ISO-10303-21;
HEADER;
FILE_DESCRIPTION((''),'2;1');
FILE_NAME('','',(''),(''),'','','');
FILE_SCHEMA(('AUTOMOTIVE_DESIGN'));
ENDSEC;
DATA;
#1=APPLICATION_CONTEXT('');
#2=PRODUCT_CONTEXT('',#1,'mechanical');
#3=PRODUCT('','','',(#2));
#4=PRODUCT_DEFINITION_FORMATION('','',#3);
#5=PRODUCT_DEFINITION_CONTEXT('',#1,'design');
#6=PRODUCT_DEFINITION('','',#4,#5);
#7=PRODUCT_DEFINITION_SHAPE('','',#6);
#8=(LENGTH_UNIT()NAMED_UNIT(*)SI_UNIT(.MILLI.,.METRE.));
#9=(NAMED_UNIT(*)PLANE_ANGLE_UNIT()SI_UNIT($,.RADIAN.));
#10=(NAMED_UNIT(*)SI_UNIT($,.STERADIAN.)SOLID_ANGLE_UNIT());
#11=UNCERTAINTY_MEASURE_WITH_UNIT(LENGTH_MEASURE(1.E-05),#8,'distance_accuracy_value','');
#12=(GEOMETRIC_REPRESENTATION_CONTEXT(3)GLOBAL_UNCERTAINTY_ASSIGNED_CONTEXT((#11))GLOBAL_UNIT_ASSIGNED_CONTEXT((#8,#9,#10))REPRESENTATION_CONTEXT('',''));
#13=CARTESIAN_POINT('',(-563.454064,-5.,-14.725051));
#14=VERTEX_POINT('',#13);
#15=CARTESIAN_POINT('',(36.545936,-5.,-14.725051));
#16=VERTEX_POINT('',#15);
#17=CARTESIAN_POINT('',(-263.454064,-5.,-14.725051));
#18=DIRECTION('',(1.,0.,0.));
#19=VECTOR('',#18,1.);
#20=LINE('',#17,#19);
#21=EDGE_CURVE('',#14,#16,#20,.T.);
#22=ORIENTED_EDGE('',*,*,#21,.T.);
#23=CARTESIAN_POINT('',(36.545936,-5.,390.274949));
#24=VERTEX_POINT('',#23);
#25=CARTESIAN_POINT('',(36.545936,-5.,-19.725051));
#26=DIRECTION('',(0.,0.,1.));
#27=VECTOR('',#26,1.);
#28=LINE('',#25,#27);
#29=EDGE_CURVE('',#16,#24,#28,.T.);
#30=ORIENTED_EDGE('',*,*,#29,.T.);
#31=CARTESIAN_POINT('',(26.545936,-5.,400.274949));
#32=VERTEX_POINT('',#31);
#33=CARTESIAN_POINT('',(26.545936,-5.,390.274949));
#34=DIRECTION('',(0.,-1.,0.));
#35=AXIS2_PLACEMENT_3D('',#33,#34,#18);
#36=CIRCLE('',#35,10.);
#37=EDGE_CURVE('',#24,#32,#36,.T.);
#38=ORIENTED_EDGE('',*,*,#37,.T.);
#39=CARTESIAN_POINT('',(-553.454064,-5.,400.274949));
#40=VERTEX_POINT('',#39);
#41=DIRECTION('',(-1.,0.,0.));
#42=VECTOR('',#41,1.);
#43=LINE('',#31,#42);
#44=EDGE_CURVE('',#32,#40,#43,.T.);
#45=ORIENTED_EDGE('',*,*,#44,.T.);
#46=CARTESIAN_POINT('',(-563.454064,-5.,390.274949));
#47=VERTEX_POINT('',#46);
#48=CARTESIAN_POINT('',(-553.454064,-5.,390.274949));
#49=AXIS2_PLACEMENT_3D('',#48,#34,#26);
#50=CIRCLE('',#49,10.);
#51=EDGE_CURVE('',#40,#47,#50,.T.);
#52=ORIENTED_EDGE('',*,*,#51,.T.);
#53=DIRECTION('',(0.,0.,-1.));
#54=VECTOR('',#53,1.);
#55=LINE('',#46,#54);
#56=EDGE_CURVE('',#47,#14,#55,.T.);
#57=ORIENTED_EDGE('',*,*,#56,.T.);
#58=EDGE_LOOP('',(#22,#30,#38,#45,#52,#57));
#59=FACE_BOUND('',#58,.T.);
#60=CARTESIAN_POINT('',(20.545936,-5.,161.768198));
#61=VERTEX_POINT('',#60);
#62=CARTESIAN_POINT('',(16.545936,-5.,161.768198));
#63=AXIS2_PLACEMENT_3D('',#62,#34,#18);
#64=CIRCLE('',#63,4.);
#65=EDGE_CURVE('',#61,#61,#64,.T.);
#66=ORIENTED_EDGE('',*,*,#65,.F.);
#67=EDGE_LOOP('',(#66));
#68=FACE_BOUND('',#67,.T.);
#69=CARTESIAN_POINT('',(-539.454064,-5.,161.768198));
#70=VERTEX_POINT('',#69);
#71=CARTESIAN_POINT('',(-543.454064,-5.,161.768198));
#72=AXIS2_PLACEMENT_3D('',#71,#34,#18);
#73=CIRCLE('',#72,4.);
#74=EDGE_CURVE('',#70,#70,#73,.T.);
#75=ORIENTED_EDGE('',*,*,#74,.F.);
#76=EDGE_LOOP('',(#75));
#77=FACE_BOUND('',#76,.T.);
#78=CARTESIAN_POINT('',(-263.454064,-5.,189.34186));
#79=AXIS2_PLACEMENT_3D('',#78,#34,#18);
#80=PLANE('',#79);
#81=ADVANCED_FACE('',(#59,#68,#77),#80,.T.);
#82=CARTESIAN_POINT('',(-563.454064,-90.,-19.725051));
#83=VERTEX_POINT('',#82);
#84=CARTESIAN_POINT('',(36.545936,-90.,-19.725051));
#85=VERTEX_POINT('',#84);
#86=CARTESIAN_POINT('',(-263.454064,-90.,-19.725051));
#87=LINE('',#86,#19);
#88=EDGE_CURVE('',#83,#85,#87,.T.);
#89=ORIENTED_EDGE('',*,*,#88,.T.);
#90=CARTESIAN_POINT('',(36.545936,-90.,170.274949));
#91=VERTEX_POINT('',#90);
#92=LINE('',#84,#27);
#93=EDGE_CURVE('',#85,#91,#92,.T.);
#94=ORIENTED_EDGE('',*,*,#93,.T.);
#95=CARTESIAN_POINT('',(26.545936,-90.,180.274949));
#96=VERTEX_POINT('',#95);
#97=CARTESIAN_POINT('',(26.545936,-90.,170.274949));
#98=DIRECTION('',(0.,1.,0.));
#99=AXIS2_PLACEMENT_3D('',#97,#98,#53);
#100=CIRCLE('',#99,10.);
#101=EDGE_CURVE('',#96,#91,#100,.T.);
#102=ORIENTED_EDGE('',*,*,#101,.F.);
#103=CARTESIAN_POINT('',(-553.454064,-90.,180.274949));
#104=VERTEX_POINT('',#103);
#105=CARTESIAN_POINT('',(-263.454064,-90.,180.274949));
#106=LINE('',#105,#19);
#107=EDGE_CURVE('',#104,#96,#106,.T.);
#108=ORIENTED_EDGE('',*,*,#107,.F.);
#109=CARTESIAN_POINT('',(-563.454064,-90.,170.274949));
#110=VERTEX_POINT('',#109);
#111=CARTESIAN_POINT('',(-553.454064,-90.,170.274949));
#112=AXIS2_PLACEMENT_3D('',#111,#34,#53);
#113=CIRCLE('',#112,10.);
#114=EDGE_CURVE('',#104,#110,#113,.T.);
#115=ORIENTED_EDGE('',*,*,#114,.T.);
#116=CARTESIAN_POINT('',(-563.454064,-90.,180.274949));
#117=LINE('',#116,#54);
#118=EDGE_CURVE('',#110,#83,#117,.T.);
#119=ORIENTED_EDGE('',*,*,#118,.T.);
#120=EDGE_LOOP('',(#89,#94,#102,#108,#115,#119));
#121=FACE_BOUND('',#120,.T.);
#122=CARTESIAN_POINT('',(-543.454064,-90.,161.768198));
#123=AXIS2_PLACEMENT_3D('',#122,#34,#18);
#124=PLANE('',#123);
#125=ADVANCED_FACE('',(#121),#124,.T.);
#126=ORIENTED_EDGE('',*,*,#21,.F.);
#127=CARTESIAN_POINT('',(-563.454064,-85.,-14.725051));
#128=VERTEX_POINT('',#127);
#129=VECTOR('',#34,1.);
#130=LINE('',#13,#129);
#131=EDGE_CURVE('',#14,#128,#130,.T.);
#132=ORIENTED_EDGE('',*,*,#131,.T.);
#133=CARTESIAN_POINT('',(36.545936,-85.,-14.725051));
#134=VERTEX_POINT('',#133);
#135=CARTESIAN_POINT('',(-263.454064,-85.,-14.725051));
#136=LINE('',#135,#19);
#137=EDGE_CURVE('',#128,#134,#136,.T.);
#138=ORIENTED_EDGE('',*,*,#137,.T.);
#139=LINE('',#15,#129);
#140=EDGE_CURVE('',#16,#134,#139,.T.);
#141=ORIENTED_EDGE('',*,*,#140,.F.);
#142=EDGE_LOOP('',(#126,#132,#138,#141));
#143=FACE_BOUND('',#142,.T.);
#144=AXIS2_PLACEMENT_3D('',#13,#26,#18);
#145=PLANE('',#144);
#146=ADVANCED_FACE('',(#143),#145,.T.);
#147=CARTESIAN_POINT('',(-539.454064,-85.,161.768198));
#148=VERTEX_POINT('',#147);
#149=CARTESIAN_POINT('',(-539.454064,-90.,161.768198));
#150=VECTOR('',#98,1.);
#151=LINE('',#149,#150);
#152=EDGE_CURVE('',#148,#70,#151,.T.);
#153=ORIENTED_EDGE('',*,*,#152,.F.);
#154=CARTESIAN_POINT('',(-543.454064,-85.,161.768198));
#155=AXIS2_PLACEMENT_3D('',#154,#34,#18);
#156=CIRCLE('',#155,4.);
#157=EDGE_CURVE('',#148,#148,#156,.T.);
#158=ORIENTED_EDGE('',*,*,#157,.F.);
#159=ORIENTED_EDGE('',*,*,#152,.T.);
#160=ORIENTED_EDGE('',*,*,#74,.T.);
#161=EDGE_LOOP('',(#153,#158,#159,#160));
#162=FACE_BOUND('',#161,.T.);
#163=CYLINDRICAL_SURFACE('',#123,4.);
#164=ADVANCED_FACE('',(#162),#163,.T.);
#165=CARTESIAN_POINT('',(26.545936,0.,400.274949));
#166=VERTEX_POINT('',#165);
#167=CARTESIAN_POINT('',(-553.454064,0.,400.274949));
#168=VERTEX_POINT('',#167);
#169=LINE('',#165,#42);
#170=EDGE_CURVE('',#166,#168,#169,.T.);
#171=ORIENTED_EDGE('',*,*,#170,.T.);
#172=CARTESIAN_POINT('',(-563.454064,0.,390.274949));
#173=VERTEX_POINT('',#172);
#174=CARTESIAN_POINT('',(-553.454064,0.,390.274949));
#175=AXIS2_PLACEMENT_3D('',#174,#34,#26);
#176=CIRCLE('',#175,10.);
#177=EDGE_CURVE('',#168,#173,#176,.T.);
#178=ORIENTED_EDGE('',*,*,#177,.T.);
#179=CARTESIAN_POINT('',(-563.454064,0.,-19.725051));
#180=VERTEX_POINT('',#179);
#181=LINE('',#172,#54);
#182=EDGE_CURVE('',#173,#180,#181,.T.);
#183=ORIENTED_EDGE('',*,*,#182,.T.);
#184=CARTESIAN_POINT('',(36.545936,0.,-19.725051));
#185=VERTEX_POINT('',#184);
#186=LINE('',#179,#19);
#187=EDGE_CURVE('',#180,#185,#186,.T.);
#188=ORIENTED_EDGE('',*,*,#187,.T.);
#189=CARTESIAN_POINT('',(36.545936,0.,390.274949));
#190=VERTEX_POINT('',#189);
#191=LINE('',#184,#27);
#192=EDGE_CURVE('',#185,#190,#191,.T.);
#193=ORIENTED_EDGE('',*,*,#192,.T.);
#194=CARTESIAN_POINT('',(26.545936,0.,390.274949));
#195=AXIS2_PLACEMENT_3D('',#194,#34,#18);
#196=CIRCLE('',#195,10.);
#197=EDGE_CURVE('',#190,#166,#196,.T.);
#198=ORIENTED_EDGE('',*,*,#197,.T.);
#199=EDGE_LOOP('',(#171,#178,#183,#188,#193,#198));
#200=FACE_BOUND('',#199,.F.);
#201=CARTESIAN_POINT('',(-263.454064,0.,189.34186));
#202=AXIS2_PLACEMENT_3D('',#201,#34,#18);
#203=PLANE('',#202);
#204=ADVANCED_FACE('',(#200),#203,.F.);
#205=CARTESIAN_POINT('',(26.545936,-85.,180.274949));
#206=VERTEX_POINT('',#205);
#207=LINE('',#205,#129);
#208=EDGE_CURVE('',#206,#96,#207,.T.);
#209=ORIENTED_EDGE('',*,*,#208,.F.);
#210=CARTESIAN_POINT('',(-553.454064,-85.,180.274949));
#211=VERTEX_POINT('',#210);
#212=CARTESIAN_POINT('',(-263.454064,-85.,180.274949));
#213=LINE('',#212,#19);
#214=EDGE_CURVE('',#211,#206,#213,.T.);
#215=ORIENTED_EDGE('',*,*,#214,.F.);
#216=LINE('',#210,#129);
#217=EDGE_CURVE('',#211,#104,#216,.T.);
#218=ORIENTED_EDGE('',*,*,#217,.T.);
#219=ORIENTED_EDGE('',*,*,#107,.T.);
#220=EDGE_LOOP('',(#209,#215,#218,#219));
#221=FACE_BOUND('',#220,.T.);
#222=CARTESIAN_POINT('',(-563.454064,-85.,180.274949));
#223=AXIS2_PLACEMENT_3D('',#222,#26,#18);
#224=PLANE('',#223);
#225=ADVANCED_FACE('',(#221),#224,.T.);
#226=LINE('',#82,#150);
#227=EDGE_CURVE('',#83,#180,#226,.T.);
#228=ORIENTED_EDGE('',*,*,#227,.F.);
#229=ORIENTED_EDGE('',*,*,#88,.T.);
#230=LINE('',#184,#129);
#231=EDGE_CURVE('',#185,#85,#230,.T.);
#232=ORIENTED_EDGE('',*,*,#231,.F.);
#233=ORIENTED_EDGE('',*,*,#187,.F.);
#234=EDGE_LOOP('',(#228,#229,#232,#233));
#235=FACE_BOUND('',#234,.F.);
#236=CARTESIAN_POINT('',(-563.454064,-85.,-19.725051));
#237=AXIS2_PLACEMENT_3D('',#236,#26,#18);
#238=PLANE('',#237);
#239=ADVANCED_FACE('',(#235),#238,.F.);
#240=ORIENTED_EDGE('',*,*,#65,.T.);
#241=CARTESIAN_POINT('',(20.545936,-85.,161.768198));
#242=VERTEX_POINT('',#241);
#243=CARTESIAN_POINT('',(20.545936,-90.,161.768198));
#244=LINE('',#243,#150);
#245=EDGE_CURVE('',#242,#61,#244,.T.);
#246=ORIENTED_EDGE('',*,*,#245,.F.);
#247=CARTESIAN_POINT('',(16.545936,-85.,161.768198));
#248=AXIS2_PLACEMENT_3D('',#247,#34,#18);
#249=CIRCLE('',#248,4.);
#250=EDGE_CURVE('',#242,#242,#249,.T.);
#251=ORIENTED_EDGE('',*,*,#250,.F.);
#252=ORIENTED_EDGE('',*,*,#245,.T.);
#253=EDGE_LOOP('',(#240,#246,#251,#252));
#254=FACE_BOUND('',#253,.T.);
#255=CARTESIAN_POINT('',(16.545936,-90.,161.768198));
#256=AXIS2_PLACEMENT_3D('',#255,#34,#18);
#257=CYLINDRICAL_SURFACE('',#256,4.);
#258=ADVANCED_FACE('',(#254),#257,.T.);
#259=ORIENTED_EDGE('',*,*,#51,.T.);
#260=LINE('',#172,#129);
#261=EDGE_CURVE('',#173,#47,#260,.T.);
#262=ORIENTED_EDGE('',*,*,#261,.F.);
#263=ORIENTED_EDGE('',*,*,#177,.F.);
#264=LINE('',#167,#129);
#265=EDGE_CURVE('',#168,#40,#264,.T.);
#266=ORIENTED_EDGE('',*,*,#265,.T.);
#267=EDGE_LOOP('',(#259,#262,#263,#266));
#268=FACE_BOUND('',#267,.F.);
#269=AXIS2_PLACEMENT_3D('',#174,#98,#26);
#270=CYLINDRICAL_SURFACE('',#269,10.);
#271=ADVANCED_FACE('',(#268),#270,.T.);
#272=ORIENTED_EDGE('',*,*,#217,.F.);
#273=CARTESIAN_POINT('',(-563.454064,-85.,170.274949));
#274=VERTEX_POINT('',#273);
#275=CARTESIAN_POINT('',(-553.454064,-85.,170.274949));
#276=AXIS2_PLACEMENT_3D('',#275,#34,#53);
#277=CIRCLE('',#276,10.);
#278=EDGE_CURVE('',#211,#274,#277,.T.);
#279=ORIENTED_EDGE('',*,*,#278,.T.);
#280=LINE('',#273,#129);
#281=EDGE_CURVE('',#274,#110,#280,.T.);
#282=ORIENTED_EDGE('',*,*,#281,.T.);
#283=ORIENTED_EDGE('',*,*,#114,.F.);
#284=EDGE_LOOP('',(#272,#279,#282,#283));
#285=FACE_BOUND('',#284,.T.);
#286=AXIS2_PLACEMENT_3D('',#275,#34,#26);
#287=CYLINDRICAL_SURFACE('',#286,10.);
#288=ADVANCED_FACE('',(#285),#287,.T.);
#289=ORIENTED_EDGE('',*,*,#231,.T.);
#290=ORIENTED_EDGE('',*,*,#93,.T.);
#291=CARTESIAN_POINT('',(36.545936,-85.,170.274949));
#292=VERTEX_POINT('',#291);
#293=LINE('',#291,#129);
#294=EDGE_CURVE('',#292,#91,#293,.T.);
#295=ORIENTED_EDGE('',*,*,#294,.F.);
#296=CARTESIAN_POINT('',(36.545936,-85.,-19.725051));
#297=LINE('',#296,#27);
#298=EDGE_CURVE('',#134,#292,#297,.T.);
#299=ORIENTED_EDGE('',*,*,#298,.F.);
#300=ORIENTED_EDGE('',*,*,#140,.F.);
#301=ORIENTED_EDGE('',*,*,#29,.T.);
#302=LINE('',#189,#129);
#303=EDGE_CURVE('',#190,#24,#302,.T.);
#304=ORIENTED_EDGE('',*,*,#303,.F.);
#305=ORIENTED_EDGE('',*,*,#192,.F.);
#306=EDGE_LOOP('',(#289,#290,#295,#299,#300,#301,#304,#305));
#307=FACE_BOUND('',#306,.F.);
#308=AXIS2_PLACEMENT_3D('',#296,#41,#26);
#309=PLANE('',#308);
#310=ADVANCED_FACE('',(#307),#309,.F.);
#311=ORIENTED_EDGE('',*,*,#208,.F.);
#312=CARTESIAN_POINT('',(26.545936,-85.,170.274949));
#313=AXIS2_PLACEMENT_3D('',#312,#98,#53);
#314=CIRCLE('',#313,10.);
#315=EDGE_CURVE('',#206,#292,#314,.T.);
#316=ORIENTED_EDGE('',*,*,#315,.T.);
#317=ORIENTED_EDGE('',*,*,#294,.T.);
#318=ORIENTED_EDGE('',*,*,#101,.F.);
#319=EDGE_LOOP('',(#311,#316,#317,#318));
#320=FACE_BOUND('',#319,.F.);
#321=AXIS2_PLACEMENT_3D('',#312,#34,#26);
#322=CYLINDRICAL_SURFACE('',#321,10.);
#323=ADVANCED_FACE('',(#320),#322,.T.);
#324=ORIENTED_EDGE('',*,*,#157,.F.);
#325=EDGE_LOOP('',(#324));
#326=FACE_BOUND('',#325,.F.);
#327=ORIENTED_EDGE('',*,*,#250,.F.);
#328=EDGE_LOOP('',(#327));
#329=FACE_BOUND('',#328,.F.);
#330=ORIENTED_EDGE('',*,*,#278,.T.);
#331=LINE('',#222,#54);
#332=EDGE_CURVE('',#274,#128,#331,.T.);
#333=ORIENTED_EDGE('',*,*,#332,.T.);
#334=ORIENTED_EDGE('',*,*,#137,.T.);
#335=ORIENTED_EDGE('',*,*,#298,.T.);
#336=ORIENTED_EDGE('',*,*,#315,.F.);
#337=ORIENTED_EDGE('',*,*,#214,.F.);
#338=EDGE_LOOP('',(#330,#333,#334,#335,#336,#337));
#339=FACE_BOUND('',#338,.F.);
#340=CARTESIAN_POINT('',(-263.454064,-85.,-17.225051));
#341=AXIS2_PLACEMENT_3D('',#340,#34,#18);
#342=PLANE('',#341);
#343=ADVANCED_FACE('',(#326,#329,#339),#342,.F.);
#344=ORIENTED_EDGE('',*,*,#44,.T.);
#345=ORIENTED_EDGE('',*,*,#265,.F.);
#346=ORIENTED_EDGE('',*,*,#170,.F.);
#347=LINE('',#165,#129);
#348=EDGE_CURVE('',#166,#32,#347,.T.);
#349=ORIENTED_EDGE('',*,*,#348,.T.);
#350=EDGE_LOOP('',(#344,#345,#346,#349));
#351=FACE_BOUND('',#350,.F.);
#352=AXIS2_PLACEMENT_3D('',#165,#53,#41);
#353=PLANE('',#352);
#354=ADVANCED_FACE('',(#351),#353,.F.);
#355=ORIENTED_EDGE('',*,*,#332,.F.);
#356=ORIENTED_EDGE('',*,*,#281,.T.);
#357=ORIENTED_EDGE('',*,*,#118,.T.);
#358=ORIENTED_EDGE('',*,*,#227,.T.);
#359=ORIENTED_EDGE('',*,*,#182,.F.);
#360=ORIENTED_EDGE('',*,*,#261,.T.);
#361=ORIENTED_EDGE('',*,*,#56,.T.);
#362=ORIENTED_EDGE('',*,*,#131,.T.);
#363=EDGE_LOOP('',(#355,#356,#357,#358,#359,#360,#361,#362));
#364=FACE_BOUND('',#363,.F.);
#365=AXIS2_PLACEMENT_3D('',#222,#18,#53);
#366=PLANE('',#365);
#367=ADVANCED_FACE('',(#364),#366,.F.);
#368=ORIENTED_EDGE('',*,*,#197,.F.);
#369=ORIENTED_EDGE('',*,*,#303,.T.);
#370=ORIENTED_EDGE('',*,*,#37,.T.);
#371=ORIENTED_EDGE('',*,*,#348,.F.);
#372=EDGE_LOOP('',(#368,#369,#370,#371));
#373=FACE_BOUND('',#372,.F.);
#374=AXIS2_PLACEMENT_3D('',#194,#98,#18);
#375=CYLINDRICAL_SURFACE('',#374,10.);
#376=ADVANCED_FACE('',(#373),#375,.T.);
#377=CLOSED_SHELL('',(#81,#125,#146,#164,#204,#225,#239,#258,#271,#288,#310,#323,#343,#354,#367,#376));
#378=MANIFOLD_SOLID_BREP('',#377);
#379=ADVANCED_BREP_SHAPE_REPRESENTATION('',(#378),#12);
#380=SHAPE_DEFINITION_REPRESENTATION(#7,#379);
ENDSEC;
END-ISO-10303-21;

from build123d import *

# Parameters (mm, degrees)
F1_DEPTH = 5
F2_W     = 600
F2_H     = 5
F3_DEPTH = 80
F4_W     = 600
F4_H     = 5
F4_H_2   = 195
F5_DEPTH = 5
F6_R     = 10
F7_R     = 4
F8_DEPTH = 85


# Not quite as in the source:
# - a feature names something its author has since deleted; it is built from what else it names


with BuildPart() as f1:
    # F0 (on Front) → F1 (new body)
    with BuildSketch(Plane.XZ):
        with BuildLine():
            Line((26.5459360182, 400.2749490738), (-553.4540639818, 400.2749490738))
            ThreePointArc((-553.4540639818, 400.2749490738), (-560.5251317936, 397.3460168857), (-563.4540639818, 390.2749490738))
            Line((-563.4540639818, 390.2749490738), (-563.4540639818, -19.7250509262))
            Line((-563.4540639818, -19.7250509262), (36.5459360182, -19.7250509262))
            Line((36.5459360182, -19.7250509262), (36.5459360182, 390.2749490738))
            ThreePointArc((36.5459360182, 390.2749490738), (33.6170038301, 397.3460168857), (26.5459360182, 400.2749490738))
        make_face()
    extrude(amount=F1_DEPTH)

    # F2 (on face) → F3 (join)
    with BuildSketch(Plane.XZ.offset(5)):
        with Locations((-263.4540639818, -17.2250509262)):
            Rectangle(F2_W, F2_H)
    extrude(amount=F3_DEPTH)

    # F4 (on face) → F5 (join)
    with BuildSketch(Plane.XZ.offset(85)):
        with Locations((-263.4540639818, -17.2250509262)):
            Rectangle(F4_W, F4_H)
        with Locations((-263.4540639818, 82.7749490738)):
            Rectangle(F4_W, F4_H_2)
    extrude(amount=F5_DEPTH)

    # F6
    f6_edges = [f1.edges().sort_by_distance(p)[0] for p in [
        (-563.454064, -87.5, 180.274949),
        (36.545936, -87.5, 180.274949),
    ]]
    fillet(f6_edges, radius=F6_R)

    # F7 (on face) → F8 (join)
    with BuildSketch(Plane.XZ.offset(90)):
        with Locations((-543.4540639818, 161.7681980133)):
            Circle(F7_R)
        with Locations((16.5459360182, 161.7681980133)):
            Circle(F7_R)
    extrude(amount=-F8_DEPTH)


solid = f1.part
